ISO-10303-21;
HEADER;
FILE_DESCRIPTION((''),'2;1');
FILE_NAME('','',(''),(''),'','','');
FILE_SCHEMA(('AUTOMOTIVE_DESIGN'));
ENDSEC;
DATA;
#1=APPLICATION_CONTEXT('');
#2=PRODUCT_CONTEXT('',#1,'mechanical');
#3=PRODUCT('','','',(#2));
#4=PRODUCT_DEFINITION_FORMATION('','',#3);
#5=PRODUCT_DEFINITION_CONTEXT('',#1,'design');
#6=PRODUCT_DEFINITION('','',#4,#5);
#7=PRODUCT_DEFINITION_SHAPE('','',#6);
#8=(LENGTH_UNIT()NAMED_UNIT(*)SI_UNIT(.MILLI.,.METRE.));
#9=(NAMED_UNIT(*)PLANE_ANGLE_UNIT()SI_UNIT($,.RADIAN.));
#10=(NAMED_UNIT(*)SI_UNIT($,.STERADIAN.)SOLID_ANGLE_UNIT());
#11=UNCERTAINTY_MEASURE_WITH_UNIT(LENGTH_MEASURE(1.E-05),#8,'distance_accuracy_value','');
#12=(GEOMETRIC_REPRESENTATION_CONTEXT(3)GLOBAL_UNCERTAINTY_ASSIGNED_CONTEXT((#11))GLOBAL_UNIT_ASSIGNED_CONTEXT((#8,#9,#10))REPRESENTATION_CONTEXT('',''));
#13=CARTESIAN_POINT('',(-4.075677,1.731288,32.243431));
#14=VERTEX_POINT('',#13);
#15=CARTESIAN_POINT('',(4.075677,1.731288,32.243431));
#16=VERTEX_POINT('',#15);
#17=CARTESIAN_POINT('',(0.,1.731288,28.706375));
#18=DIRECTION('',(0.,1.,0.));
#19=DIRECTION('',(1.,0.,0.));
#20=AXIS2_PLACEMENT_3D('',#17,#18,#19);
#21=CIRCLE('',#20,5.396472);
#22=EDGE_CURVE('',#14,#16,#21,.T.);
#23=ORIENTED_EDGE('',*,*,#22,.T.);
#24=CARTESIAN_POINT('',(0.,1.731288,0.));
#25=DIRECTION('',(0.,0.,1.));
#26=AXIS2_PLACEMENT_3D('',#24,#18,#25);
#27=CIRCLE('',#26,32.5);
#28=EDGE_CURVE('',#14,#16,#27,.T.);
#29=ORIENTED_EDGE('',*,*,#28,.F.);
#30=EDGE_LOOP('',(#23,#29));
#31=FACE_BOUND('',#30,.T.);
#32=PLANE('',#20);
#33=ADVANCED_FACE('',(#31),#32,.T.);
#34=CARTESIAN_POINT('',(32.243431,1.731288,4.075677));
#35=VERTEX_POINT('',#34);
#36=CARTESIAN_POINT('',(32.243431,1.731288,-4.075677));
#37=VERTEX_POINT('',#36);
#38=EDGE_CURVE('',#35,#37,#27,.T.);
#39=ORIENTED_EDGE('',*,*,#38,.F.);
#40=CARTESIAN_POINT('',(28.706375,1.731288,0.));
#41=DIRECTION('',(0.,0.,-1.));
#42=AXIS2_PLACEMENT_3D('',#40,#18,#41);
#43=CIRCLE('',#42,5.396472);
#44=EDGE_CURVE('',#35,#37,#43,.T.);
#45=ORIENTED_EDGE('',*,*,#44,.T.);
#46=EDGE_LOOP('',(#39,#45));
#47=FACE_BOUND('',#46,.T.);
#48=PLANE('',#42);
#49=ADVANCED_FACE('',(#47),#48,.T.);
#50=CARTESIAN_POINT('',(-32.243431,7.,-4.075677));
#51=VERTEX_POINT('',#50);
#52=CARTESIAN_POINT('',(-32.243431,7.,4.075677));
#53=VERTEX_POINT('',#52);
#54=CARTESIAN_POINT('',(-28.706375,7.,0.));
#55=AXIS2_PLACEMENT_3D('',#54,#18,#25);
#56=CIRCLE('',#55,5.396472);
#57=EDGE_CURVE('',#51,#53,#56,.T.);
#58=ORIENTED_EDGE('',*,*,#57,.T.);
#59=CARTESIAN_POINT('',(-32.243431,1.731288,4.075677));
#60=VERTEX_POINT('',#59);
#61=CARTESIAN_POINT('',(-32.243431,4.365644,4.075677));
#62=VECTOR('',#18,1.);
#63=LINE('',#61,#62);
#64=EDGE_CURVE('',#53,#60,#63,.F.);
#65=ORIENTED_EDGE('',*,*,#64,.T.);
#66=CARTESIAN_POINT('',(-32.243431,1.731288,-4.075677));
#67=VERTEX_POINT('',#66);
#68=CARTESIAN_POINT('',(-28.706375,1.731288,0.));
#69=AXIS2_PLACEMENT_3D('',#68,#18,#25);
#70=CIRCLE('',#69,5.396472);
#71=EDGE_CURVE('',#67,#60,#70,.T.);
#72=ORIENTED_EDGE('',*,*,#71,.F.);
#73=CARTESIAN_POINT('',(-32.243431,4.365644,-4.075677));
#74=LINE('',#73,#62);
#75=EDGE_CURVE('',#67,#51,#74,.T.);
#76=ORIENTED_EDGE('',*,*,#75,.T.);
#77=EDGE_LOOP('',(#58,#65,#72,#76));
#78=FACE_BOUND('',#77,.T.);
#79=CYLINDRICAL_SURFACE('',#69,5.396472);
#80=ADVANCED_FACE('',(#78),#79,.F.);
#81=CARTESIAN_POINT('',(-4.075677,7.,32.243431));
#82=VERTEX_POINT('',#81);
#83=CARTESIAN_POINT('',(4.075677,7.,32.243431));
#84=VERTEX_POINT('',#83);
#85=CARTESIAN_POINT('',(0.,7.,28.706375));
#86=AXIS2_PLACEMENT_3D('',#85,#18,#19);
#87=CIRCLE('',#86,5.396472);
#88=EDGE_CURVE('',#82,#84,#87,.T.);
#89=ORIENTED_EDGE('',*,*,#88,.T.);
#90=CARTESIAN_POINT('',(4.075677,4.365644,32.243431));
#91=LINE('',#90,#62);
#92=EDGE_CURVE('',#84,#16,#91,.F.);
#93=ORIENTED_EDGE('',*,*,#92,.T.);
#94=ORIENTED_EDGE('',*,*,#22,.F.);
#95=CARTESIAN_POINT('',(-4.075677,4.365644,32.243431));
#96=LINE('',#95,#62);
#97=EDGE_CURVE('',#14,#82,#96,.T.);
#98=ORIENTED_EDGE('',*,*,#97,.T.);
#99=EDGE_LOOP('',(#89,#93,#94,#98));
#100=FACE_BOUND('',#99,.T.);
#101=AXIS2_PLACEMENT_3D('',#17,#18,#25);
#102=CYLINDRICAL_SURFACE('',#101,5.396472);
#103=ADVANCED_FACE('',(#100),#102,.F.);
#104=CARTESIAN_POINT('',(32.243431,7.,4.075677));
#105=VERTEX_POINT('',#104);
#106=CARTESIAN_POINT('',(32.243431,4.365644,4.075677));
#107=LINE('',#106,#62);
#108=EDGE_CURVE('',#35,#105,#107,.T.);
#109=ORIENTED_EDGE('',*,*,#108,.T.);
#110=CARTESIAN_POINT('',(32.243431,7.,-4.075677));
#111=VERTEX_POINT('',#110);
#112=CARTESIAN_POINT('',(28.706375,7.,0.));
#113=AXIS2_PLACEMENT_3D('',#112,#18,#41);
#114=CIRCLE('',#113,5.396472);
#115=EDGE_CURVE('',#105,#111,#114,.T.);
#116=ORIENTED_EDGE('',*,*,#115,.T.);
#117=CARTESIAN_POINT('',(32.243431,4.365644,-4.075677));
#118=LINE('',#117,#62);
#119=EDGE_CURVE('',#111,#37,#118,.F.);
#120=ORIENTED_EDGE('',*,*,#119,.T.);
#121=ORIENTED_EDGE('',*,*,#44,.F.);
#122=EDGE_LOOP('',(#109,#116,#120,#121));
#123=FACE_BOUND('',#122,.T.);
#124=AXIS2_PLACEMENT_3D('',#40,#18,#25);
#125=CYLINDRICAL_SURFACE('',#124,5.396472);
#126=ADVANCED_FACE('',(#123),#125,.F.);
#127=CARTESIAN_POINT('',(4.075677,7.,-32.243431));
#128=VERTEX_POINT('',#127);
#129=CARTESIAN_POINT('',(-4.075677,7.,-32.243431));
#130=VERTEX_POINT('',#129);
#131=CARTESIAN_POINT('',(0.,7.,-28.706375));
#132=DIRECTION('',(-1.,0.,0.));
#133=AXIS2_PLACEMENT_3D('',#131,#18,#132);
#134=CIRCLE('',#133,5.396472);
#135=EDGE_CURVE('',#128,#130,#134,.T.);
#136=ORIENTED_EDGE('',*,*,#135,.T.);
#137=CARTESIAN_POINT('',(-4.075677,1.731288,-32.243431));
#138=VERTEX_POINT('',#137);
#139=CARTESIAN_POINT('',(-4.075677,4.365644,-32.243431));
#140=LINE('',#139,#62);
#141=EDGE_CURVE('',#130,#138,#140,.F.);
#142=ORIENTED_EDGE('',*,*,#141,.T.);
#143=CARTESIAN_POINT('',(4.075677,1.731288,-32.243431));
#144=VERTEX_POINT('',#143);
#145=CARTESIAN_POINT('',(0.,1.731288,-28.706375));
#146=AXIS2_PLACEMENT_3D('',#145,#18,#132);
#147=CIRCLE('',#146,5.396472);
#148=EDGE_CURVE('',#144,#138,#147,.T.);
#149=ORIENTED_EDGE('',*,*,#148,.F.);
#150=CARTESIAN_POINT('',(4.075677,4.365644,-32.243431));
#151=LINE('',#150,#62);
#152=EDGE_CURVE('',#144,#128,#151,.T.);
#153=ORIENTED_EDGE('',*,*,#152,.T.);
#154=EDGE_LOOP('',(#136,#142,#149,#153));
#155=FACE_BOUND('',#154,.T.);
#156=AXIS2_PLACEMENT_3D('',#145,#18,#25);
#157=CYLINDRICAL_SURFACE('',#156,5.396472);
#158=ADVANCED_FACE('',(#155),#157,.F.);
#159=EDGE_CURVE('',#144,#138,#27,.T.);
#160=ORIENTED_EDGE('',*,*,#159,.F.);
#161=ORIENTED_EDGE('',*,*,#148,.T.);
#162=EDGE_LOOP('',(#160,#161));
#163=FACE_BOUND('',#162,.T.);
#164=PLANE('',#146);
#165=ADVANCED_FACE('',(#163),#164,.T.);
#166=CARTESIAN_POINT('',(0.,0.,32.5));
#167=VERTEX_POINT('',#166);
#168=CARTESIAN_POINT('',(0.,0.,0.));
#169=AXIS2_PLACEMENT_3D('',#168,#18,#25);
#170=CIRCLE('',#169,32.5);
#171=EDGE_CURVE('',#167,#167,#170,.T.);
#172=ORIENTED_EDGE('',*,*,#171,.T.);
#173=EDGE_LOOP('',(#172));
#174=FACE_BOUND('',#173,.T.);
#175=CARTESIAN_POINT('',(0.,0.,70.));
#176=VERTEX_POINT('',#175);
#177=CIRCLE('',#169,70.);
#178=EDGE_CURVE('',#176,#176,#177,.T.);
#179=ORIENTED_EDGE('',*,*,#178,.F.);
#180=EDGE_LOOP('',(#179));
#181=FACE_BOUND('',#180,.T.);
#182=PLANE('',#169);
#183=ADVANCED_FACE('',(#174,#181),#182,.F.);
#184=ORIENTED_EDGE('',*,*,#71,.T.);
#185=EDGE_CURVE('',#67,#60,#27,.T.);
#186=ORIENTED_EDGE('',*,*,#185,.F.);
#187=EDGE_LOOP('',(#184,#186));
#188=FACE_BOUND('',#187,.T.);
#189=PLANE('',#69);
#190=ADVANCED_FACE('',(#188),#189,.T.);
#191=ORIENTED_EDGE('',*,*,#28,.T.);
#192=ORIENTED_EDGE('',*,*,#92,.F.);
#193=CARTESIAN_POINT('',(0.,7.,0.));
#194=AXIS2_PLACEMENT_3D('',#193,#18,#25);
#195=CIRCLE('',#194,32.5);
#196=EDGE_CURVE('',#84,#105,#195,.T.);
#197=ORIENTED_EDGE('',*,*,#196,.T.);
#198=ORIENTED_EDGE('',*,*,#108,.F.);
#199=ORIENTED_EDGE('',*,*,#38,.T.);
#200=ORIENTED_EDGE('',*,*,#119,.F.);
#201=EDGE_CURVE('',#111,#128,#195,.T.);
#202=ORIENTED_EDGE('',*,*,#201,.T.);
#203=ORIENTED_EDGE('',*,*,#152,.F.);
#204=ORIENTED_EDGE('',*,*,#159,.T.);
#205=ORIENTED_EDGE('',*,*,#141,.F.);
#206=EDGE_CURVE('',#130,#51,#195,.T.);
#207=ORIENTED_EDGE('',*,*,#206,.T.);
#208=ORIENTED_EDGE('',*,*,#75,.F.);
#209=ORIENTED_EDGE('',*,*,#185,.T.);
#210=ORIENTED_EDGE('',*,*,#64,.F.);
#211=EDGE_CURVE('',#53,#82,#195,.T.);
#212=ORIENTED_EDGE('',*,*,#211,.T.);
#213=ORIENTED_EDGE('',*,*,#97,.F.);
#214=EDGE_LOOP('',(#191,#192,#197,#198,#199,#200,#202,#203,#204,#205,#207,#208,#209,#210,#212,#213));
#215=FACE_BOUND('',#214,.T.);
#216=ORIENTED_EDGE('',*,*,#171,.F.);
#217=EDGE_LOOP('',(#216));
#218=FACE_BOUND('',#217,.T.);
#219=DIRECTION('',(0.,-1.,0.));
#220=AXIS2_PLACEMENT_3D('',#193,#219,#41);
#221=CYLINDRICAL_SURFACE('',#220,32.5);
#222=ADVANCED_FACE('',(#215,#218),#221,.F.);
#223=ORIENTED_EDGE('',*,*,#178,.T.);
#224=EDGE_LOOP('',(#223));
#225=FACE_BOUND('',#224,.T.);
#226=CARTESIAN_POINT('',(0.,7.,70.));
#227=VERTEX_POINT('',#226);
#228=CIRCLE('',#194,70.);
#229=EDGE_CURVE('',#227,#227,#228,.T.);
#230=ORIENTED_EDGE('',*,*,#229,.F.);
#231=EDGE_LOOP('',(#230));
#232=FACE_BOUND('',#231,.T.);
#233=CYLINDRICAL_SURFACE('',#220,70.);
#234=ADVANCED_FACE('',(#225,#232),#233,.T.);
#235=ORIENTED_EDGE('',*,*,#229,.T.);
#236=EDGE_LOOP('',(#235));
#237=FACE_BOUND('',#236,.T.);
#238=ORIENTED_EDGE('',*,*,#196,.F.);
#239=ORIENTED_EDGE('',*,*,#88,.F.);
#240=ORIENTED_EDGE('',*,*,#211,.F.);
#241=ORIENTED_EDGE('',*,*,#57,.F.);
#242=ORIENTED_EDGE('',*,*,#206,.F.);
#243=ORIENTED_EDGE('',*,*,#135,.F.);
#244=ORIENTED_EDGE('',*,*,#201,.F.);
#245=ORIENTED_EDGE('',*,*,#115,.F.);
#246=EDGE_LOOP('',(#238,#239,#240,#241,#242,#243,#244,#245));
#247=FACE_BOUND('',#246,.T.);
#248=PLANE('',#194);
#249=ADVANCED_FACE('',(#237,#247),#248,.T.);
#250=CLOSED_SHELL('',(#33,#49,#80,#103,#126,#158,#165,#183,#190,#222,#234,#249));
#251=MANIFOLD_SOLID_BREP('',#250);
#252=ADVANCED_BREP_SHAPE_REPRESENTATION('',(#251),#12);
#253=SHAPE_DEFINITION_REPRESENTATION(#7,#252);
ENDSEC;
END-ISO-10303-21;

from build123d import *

# Parameters (mm, degrees)
SKETCH1_R           = 70
BOSS_EXTRUDE1_DEPTH = 7
SKETCH2_R           = 32.5
CUT_EXTRUDE1_DEPTH  = 100.242128151
SKETCH3_R           = 5.396472421
CUT_EXTRUDE2_DEPTH  = 5.268711771
CIRPATTERN1_COUNT   = 4


with BuildPart() as part:
    # Sketch1 → Boss-Extrude1 (new body)
    with BuildSketch(Plane(origin=(0, 0, 0), x_dir=(1, 0, 0), z_dir=(0, 1, 0))):
        Circle(SKETCH1_R)
    extrude(amount=BOSS_EXTRUDE1_DEPTH)

    # Sketch2 → Cut-Extrude1 (cut, through all)
    with BuildSketch(Plane(origin=(0, 0, 0), x_dir=(1, 0, 0), z_dir=(0, 1, 0))):
        Circle(SKETCH2_R)
    extrude(amount=CUT_EXTRUDE1_DEPTH, mode=Mode.SUBTRACT)

    # Sketch3 → Cut-Extrude2 (cut)
    with BuildSketch(Plane(origin=(0, 7, 0), x_dir=(1, 0, 0), z_dir=(0, 1, 0))):
        with Locations((-28.706374574, 0)):
            Circle(SKETCH3_R)
    cut_extrude2 = extrude(amount=-CUT_EXTRUDE2_DEPTH, mode=Mode.SUBTRACT)

    # CirPattern1: Cut-Extrude2 ×4 about axis
    cirpattern1_axis = Axis((0, 0, 0), (0, 1, 0))
    for i in range(1, CIRPATTERN1_COUNT):
        add(cut_extrude2.rotate(cirpattern1_axis, i * 360 / CIRPATTERN1_COUNT), mode=Mode.SUBTRACT)


solid = part.part
